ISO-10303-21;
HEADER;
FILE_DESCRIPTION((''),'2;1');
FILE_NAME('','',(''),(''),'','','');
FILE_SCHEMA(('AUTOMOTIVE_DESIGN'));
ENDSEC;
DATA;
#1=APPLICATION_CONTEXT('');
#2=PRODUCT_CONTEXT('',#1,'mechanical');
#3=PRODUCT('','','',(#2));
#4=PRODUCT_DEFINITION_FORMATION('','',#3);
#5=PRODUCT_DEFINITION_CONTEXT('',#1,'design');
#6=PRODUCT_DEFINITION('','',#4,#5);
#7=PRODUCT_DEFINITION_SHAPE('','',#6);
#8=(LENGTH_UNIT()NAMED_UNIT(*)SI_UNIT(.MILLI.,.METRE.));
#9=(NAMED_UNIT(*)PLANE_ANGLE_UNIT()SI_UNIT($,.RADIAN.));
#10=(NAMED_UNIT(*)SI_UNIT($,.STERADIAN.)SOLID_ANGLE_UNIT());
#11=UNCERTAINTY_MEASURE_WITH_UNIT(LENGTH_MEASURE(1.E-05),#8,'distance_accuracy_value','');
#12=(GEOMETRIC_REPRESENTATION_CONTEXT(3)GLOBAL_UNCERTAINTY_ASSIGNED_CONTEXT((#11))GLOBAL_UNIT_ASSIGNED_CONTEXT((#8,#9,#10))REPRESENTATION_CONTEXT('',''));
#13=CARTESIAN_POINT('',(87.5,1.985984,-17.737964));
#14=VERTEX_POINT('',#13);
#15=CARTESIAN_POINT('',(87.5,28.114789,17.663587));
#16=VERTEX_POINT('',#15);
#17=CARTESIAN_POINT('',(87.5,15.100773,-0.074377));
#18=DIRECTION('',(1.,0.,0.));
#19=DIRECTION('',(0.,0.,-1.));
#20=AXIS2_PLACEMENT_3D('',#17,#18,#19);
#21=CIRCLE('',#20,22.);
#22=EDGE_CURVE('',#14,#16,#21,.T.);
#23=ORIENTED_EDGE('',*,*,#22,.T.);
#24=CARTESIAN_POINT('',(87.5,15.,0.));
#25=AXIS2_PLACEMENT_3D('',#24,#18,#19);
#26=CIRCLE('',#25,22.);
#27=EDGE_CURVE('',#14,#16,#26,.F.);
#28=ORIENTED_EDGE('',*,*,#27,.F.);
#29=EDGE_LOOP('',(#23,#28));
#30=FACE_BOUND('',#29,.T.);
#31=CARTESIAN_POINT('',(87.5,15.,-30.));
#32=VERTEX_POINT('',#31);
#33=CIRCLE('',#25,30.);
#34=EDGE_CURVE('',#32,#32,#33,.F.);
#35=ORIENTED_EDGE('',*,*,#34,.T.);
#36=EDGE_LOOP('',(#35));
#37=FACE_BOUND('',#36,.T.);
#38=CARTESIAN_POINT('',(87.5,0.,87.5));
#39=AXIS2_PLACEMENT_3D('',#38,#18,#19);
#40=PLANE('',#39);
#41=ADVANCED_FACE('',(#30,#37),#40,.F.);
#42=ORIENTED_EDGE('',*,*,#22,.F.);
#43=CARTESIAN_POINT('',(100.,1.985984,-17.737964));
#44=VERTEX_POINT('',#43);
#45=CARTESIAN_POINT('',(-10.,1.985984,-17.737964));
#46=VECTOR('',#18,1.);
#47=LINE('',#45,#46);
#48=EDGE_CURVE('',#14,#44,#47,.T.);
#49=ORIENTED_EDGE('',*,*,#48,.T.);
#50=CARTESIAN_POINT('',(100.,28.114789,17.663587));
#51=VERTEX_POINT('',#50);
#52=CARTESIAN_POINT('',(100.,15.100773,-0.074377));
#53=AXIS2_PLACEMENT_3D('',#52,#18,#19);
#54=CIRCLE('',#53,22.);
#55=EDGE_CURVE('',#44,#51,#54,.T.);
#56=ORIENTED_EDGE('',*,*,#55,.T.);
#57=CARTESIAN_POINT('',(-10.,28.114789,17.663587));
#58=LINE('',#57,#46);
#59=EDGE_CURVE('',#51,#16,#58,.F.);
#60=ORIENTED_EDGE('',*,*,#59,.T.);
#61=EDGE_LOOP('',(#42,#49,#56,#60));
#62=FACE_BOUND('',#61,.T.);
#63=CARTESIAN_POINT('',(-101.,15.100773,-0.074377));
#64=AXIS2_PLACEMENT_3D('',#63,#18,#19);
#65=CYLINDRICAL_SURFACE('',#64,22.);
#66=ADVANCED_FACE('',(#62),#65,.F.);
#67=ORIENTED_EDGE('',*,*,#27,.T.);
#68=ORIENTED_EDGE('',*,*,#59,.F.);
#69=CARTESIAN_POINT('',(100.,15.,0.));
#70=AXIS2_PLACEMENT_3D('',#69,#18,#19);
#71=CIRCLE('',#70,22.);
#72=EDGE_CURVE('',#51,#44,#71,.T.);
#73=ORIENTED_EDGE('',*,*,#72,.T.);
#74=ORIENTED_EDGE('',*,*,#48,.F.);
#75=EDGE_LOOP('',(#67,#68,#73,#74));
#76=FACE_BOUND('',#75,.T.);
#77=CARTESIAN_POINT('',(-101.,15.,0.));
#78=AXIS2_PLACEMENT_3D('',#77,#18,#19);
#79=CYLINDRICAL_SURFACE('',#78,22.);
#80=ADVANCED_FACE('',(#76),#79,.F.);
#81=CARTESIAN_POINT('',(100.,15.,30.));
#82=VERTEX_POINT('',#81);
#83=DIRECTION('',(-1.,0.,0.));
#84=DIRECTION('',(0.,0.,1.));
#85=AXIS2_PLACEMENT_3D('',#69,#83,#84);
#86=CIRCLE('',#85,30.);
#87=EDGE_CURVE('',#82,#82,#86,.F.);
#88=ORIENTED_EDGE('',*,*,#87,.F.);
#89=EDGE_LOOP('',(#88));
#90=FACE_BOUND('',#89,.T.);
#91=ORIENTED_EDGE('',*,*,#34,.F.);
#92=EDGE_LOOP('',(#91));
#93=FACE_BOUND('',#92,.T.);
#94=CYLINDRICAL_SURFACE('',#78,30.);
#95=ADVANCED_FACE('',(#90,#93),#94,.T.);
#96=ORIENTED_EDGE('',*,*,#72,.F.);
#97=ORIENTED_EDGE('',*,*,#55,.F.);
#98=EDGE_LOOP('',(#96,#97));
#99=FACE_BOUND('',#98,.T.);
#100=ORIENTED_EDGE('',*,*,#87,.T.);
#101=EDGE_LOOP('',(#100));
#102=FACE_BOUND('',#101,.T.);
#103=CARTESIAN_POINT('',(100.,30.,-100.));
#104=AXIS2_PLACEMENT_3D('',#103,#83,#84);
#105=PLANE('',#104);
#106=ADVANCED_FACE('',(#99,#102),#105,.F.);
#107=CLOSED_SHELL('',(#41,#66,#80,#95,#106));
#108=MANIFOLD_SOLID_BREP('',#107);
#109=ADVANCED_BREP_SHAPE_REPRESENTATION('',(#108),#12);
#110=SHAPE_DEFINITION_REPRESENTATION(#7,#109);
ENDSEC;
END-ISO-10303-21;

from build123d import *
from build123d.topology import SkipClean

# Parameters (mm, degrees)
SKETCH1_W           = 200
SKETCH1_H           = 200
BOSS_EXTRUDE1_DEPTH = 30
SKETCH4_W           = 175
SKETCH4_H           = 175
CUT_EXTRUDE1_DEPTH  = 30
SKETCH7_R           = 4
CUT_EXTRUDE2_DEPTH  = 210
SKETCH10_W          = 6.040230253
SKETCH10_H          = 30
BOSS_EXTRUDE2_DEPTH = 20
SKETCH11_W          = 10
SKETCH11_H          = 30
BOSS_EXTRUDE3_DEPTH = 20
CUT_EXTRUDE3_START  = -231
SKETCH12_R          = 4
CUT_EXTRUDE3_DEPTH  = 231
SKETCH13_R          = 4
CUT_EXTRUDE5_DEPTH  = 231
SKETCH14_R          = 4
CUT_EXTRUDE6_DEPTH  = 250.5
SKETCH15_R          = 30
SKETCH15_R_2        = 22
BOSS_EXTRUDE5_DEPTH = 201
SKETCH17_R          = 22
CUT_EXTRUDE7_DEPTH  = 201
SKETCH21_W          = 9.5
SKETCH21_H          = 28.855904386
BOSS_EXTRUDE6_DEPTH = 26
SKETCH22_W          = 9.5
SKETCH22_H          = 6.040230253
CUT_EXTRUDE10_DEPTH = 49
SKETCH23_W          = 10.008922512
SKETCH23_H          = 28.855904386
BOSS_EXTRUDE7_DEPTH = 21
SKETCH24_W          = 9.5
SKETCH24_H          = 1.144095614
CUT_EXTRUDE11_DEPTH = 27
SKETCH26_W          = 0.50137975
SKETCH26_H          = 20.893624798
CUT_EXTRUDE12_DEPTH = 35
SKETCH27_R          = 49.192783102
CUT_EXTRUDE13_DEPTH = 175
SKETCH28_R          = 41.209023923
CUT_EXTRUDE14_DEPTH = 175
CUT_EXTRUDE15_START = -220
CUT_EXTRUDE15_DEPTH = 220
SKETCH33_R          = 22
CUT_EXTRUDE16_DEPTH = 220
SKETCH34_W          = 15.88682826
SKETCH34_H          = 39.259510286
CUT_EXTRUDE17_DEPTH = 14
SKETCH35_R          = 61.810225576
CUT_EXTRUDE18_DEPTH = 218


# Read off the part's stored shape, not the designer's step: Cut-Extrude15
with BuildPart() as part:
    # Sketch1 → Boss-Extrude1 (new body)
    with BuildSketch(Plane(origin=(0, 0, 0), x_dir=(1, 0, 0), z_dir=(0, 1, 0))):
        Rectangle(SKETCH1_W, SKETCH1_H)
    extrude(amount=BOSS_EXTRUDE1_DEPTH)

    # Sketch4 → Cut-Extrude1 (cut)
    with BuildSketch(Plane(origin=(0, 30, 0), x_dir=(1, 0, 0), z_dir=(0, 1, 0))):
        Rectangle(SKETCH4_W, SKETCH4_H)
    extrude(amount=-CUT_EXTRUDE1_DEPTH, mode=Mode.SUBTRACT)

    # Sketch7 → Cut-Extrude2 (cut)
    with BuildSketch(Plane.ZY.offset(100)):
        with Locations((0, 15)):
            Circle(SKETCH7_R)
    extrude(amount=-CUT_EXTRUDE2_DEPTH, mode=Mode.SUBTRACT)

    # Sketch10 → Boss-Extrude2 (add)
    with BuildSketch(Plane.ZY.offset(100)):
        with Locations((-11.64671233, 15)):
            Rectangle(SKETCH10_W, SKETCH10_H)
    extrude(amount=BOSS_EXTRUDE2_DEPTH)

    # Sketch11 → Boss-Extrude3 (add)
    with BuildSketch(Plane.XY.offset(-8.626597203)):
        with Locations((-115, 15)):
            Rectangle(SKETCH11_W, SKETCH11_H)
    extrude(amount=BOSS_EXTRUDE3_DEPTH)

    # Sketch12 → Cut-Extrude3 (cut)
    with BuildSketch(Plane(origin=(100, 0, 0), x_dir=(0, 0, -1), z_dir=(1, 0, 0)).offset(CUT_EXTRUDE3_START)):
        with Locations(Location((0, 15, 0), (0, 0, 180))):
            Circle(SKETCH12_R)
    extrude(amount=CUT_EXTRUDE3_DEPTH, mode=Mode.SUBTRACT)

    # Sketch13 → Cut-Extrude5 (cut)
    with BuildSketch(Plane(origin=(0, 30, 0), x_dir=(1, 0, 0), z_dir=(0, 1, 0))):
        with Locations(Location((-93.69452155, -93.045501349, 0), (0, 0, 270))):
            Circle(SKETCH13_R)
    extrude(amount=-CUT_EXTRUDE5_DEPTH, mode=Mode.SUBTRACT)

    # Sketch14 → Cut-Extrude6 (cut)
    with BuildSketch(Plane.XY.offset(100)):
        with Locations((0, 13.614739596)):
            Circle(SKETCH14_R)
    extrude(amount=-CUT_EXTRUDE6_DEPTH, mode=Mode.SUBTRACT)

    # Sketch15 → Boss-Extrude5 (add)
    with BuildSketch(Plane(origin=(100, 0, 0), x_dir=(0, 0, -1), z_dir=(1, 0, 0))):
        with Locations((0, 15)):
            Circle(SKETCH15_R)
        with Locations((0, 15)):
            Circle(SKETCH15_R_2, mode=Mode.SUBTRACT)
    extrude(amount=-BOSS_EXTRUDE5_DEPTH)

    # Sketch17 → Cut-Extrude7 (cut)
    with BuildSketch(Plane(origin=(100, 0, 0), x_dir=(0, 0, -1), z_dir=(1, 0, 0))):
        with Locations((0.074377339, 15.100772812)):
            Circle(SKETCH17_R)
    extrude(amount=-CUT_EXTRUDE7_DEPTH, mode=Mode.SUBTRACT)


with BuildPart() as cut_extrude7_piece_1:
    # of the separate pieces the step leaves, piece 1, a body of its own (cut_extrude7_pieces)
    add(part.part.solids().sort_by_distance((-100, 0, -100))[0])



with BuildPart() as cut_extrude7_piece_2:
    # of the separate pieces the step leaves, piece 2, a body of its own (cut_extrude7_pieces)
    add(part.part.solids().sort_by_distance((-101, 0, -14.666827456))[0])

    # Sketch21 → Boss-Extrude6 (add)
    with BuildSketch(Plane(origin=(0, 0, -14.666827456), x_dir=(-1, 0, 0), z_dir=(0, 0, -1))):
        with Locations((115.25, 15.572047807)):
            Rectangle(SKETCH21_W, SKETCH21_H)
    extrude(amount=BOSS_EXTRUDE6_DEPTH)

    # Sketch22 → Cut-Extrude10 (cut)
    with BuildSketch(Plane(origin=(0, 30, 0), x_dir=(1, 0, 0), z_dir=(0, 1, 0))):
        with Locations((-105.75, 11.64671233)):
            Rectangle(SKETCH22_W, SKETCH22_H)
    extrude(amount=-CUT_EXTRUDE10_DEPTH, mode=Mode.SUBTRACT)


with BuildPart() as cut_extrude7_piece_1_1:
    add(cut_extrude7_piece_1.part)

    add(cut_extrude7_piece_2.part)  # Boss-Extrude7 merges Cut-Extrude7 piece 2
    # Sketch23 → Boss-Extrude7 (add)
    with BuildSketch(Plane(origin=(-110.5, 0, 0), x_dir=(0, 0, -1), z_dir=(1, 0, 0))):
        with Locations((35.6623662, 15.572047807)):
            Rectangle(SKETCH23_W, SKETCH23_H)
    extrude(amount=BOSS_EXTRUDE7_DEPTH)

    # Sketch24 → Cut-Extrude11 (cut)
    with BuildSketch(Plane(origin=(0, 0, -14.666827456), x_dir=(-1, 0, 0), z_dir=(0, 0, -1))):
        with Locations((115.25, 0.572047807)):
            Rectangle(SKETCH24_W, SKETCH24_H)
    extrude(amount=-CUT_EXTRUDE11_DEPTH, mode=Mode.SUBTRACT)

    # Sketch26 → Cut-Extrude12 (cut)
    with BuildSketch(Plane.XZ):
        with Locations((-110.249310125, 1.820215196)):
            Rectangle(SKETCH26_W, SKETCH26_H)
    extrude(amount=-CUT_EXTRUDE12_DEPTH, mode=Mode.SUBTRACT)

    # Sketch27 → Cut-Extrude13 (cut)
    with BuildSketch(Plane(origin=(-87.5, 0, 0), x_dir=(0, 0, -1), z_dir=(1, 0, 0))):
        with Locations((-31.916352411, 15.376133278)):
            Circle(SKETCH27_R)
    extrude(amount=CUT_EXTRUDE13_DEPTH, mode=Mode.SUBTRACT)

    # Sketch28 → Cut-Extrude14 (cut)
    with BuildSketch(Plane(origin=(-87.5, 0, 0), x_dir=(0, 0, -1), z_dir=(1, 0, 0))):
        with Locations((37.762434774, 15.494435184)):
            Circle(SKETCH28_R)
    extrude(amount=CUT_EXTRUDE14_DEPTH, mode=Mode.SUBTRACT)

    # Cut-Extrude15 outline → Cut-Extrude15 (cut)
    with SkipClean():  # the faces are left unmerged after this step: merging them gives an invalid solid
        with BuildSketch(Plane(origin=(100, 0, 0), x_dir=(0, 0, -1), z_dir=(1, 0, 0)).offset(CUT_EXTRUDE15_START)):
            with BuildLine():
                ThreePointArc((25.980762114, 30), (30, 15), (25.980762114, 0))
                Line((25.980762114, 0), (100, 0))
                Line((100, 0), (100, 30))
                Line((100, 30), (25.980762114, 30))
            make_face()
            with BuildLine():
                ThreePointArc((-25.980762114, 0), (-30, 15), (-25.980762114, 30))
                Line((-25.980762114, 30), (-100, 30))
                Line((-100, 30), (-100, 0))
                Line((-100, 0), (-25.980762114, 0))
            make_face()
        extrude(amount=CUT_EXTRUDE15_DEPTH, mode=Mode.SUBTRACT)

    # Sketch33 → Cut-Extrude16 (cut)
    with SkipClean():  # the faces are left unmerged after this step: merging them gives an invalid solid
        with BuildSketch(Plane(origin=(100, 0, 0), x_dir=(0, 0, -1), z_dir=(1, 0, 0))):
            with Locations((0, 15)):
                Circle(SKETCH33_R)
        extrude(amount=-CUT_EXTRUDE16_DEPTH, mode=Mode.SUBTRACT)

    # Sketch34 → Cut-Extrude17 (cut)
    with SkipClean():  # the faces are left unmerged after this step: merging them gives an invalid solid
        with BuildSketch(Plane.ZY.offset(120)):
            with Locations((-24.036891069, 10.370244857)):
                Rectangle(SKETCH34_W, SKETCH34_H)
        extrude(amount=-CUT_EXTRUDE17_DEPTH, mode=Mode.SUBTRACT)

    # Sketch35 → Cut-Extrude18 (cut)
    with BuildSketch(Plane.ZY.offset(-87.5)):
        with Locations((-0.860757222, 19.909168714)):
            Circle(SKETCH35_R)
    extrude(amount=CUT_EXTRUDE18_DEPTH, mode=Mode.SUBTRACT)


solid = cut_extrude7_piece_1_1.part
